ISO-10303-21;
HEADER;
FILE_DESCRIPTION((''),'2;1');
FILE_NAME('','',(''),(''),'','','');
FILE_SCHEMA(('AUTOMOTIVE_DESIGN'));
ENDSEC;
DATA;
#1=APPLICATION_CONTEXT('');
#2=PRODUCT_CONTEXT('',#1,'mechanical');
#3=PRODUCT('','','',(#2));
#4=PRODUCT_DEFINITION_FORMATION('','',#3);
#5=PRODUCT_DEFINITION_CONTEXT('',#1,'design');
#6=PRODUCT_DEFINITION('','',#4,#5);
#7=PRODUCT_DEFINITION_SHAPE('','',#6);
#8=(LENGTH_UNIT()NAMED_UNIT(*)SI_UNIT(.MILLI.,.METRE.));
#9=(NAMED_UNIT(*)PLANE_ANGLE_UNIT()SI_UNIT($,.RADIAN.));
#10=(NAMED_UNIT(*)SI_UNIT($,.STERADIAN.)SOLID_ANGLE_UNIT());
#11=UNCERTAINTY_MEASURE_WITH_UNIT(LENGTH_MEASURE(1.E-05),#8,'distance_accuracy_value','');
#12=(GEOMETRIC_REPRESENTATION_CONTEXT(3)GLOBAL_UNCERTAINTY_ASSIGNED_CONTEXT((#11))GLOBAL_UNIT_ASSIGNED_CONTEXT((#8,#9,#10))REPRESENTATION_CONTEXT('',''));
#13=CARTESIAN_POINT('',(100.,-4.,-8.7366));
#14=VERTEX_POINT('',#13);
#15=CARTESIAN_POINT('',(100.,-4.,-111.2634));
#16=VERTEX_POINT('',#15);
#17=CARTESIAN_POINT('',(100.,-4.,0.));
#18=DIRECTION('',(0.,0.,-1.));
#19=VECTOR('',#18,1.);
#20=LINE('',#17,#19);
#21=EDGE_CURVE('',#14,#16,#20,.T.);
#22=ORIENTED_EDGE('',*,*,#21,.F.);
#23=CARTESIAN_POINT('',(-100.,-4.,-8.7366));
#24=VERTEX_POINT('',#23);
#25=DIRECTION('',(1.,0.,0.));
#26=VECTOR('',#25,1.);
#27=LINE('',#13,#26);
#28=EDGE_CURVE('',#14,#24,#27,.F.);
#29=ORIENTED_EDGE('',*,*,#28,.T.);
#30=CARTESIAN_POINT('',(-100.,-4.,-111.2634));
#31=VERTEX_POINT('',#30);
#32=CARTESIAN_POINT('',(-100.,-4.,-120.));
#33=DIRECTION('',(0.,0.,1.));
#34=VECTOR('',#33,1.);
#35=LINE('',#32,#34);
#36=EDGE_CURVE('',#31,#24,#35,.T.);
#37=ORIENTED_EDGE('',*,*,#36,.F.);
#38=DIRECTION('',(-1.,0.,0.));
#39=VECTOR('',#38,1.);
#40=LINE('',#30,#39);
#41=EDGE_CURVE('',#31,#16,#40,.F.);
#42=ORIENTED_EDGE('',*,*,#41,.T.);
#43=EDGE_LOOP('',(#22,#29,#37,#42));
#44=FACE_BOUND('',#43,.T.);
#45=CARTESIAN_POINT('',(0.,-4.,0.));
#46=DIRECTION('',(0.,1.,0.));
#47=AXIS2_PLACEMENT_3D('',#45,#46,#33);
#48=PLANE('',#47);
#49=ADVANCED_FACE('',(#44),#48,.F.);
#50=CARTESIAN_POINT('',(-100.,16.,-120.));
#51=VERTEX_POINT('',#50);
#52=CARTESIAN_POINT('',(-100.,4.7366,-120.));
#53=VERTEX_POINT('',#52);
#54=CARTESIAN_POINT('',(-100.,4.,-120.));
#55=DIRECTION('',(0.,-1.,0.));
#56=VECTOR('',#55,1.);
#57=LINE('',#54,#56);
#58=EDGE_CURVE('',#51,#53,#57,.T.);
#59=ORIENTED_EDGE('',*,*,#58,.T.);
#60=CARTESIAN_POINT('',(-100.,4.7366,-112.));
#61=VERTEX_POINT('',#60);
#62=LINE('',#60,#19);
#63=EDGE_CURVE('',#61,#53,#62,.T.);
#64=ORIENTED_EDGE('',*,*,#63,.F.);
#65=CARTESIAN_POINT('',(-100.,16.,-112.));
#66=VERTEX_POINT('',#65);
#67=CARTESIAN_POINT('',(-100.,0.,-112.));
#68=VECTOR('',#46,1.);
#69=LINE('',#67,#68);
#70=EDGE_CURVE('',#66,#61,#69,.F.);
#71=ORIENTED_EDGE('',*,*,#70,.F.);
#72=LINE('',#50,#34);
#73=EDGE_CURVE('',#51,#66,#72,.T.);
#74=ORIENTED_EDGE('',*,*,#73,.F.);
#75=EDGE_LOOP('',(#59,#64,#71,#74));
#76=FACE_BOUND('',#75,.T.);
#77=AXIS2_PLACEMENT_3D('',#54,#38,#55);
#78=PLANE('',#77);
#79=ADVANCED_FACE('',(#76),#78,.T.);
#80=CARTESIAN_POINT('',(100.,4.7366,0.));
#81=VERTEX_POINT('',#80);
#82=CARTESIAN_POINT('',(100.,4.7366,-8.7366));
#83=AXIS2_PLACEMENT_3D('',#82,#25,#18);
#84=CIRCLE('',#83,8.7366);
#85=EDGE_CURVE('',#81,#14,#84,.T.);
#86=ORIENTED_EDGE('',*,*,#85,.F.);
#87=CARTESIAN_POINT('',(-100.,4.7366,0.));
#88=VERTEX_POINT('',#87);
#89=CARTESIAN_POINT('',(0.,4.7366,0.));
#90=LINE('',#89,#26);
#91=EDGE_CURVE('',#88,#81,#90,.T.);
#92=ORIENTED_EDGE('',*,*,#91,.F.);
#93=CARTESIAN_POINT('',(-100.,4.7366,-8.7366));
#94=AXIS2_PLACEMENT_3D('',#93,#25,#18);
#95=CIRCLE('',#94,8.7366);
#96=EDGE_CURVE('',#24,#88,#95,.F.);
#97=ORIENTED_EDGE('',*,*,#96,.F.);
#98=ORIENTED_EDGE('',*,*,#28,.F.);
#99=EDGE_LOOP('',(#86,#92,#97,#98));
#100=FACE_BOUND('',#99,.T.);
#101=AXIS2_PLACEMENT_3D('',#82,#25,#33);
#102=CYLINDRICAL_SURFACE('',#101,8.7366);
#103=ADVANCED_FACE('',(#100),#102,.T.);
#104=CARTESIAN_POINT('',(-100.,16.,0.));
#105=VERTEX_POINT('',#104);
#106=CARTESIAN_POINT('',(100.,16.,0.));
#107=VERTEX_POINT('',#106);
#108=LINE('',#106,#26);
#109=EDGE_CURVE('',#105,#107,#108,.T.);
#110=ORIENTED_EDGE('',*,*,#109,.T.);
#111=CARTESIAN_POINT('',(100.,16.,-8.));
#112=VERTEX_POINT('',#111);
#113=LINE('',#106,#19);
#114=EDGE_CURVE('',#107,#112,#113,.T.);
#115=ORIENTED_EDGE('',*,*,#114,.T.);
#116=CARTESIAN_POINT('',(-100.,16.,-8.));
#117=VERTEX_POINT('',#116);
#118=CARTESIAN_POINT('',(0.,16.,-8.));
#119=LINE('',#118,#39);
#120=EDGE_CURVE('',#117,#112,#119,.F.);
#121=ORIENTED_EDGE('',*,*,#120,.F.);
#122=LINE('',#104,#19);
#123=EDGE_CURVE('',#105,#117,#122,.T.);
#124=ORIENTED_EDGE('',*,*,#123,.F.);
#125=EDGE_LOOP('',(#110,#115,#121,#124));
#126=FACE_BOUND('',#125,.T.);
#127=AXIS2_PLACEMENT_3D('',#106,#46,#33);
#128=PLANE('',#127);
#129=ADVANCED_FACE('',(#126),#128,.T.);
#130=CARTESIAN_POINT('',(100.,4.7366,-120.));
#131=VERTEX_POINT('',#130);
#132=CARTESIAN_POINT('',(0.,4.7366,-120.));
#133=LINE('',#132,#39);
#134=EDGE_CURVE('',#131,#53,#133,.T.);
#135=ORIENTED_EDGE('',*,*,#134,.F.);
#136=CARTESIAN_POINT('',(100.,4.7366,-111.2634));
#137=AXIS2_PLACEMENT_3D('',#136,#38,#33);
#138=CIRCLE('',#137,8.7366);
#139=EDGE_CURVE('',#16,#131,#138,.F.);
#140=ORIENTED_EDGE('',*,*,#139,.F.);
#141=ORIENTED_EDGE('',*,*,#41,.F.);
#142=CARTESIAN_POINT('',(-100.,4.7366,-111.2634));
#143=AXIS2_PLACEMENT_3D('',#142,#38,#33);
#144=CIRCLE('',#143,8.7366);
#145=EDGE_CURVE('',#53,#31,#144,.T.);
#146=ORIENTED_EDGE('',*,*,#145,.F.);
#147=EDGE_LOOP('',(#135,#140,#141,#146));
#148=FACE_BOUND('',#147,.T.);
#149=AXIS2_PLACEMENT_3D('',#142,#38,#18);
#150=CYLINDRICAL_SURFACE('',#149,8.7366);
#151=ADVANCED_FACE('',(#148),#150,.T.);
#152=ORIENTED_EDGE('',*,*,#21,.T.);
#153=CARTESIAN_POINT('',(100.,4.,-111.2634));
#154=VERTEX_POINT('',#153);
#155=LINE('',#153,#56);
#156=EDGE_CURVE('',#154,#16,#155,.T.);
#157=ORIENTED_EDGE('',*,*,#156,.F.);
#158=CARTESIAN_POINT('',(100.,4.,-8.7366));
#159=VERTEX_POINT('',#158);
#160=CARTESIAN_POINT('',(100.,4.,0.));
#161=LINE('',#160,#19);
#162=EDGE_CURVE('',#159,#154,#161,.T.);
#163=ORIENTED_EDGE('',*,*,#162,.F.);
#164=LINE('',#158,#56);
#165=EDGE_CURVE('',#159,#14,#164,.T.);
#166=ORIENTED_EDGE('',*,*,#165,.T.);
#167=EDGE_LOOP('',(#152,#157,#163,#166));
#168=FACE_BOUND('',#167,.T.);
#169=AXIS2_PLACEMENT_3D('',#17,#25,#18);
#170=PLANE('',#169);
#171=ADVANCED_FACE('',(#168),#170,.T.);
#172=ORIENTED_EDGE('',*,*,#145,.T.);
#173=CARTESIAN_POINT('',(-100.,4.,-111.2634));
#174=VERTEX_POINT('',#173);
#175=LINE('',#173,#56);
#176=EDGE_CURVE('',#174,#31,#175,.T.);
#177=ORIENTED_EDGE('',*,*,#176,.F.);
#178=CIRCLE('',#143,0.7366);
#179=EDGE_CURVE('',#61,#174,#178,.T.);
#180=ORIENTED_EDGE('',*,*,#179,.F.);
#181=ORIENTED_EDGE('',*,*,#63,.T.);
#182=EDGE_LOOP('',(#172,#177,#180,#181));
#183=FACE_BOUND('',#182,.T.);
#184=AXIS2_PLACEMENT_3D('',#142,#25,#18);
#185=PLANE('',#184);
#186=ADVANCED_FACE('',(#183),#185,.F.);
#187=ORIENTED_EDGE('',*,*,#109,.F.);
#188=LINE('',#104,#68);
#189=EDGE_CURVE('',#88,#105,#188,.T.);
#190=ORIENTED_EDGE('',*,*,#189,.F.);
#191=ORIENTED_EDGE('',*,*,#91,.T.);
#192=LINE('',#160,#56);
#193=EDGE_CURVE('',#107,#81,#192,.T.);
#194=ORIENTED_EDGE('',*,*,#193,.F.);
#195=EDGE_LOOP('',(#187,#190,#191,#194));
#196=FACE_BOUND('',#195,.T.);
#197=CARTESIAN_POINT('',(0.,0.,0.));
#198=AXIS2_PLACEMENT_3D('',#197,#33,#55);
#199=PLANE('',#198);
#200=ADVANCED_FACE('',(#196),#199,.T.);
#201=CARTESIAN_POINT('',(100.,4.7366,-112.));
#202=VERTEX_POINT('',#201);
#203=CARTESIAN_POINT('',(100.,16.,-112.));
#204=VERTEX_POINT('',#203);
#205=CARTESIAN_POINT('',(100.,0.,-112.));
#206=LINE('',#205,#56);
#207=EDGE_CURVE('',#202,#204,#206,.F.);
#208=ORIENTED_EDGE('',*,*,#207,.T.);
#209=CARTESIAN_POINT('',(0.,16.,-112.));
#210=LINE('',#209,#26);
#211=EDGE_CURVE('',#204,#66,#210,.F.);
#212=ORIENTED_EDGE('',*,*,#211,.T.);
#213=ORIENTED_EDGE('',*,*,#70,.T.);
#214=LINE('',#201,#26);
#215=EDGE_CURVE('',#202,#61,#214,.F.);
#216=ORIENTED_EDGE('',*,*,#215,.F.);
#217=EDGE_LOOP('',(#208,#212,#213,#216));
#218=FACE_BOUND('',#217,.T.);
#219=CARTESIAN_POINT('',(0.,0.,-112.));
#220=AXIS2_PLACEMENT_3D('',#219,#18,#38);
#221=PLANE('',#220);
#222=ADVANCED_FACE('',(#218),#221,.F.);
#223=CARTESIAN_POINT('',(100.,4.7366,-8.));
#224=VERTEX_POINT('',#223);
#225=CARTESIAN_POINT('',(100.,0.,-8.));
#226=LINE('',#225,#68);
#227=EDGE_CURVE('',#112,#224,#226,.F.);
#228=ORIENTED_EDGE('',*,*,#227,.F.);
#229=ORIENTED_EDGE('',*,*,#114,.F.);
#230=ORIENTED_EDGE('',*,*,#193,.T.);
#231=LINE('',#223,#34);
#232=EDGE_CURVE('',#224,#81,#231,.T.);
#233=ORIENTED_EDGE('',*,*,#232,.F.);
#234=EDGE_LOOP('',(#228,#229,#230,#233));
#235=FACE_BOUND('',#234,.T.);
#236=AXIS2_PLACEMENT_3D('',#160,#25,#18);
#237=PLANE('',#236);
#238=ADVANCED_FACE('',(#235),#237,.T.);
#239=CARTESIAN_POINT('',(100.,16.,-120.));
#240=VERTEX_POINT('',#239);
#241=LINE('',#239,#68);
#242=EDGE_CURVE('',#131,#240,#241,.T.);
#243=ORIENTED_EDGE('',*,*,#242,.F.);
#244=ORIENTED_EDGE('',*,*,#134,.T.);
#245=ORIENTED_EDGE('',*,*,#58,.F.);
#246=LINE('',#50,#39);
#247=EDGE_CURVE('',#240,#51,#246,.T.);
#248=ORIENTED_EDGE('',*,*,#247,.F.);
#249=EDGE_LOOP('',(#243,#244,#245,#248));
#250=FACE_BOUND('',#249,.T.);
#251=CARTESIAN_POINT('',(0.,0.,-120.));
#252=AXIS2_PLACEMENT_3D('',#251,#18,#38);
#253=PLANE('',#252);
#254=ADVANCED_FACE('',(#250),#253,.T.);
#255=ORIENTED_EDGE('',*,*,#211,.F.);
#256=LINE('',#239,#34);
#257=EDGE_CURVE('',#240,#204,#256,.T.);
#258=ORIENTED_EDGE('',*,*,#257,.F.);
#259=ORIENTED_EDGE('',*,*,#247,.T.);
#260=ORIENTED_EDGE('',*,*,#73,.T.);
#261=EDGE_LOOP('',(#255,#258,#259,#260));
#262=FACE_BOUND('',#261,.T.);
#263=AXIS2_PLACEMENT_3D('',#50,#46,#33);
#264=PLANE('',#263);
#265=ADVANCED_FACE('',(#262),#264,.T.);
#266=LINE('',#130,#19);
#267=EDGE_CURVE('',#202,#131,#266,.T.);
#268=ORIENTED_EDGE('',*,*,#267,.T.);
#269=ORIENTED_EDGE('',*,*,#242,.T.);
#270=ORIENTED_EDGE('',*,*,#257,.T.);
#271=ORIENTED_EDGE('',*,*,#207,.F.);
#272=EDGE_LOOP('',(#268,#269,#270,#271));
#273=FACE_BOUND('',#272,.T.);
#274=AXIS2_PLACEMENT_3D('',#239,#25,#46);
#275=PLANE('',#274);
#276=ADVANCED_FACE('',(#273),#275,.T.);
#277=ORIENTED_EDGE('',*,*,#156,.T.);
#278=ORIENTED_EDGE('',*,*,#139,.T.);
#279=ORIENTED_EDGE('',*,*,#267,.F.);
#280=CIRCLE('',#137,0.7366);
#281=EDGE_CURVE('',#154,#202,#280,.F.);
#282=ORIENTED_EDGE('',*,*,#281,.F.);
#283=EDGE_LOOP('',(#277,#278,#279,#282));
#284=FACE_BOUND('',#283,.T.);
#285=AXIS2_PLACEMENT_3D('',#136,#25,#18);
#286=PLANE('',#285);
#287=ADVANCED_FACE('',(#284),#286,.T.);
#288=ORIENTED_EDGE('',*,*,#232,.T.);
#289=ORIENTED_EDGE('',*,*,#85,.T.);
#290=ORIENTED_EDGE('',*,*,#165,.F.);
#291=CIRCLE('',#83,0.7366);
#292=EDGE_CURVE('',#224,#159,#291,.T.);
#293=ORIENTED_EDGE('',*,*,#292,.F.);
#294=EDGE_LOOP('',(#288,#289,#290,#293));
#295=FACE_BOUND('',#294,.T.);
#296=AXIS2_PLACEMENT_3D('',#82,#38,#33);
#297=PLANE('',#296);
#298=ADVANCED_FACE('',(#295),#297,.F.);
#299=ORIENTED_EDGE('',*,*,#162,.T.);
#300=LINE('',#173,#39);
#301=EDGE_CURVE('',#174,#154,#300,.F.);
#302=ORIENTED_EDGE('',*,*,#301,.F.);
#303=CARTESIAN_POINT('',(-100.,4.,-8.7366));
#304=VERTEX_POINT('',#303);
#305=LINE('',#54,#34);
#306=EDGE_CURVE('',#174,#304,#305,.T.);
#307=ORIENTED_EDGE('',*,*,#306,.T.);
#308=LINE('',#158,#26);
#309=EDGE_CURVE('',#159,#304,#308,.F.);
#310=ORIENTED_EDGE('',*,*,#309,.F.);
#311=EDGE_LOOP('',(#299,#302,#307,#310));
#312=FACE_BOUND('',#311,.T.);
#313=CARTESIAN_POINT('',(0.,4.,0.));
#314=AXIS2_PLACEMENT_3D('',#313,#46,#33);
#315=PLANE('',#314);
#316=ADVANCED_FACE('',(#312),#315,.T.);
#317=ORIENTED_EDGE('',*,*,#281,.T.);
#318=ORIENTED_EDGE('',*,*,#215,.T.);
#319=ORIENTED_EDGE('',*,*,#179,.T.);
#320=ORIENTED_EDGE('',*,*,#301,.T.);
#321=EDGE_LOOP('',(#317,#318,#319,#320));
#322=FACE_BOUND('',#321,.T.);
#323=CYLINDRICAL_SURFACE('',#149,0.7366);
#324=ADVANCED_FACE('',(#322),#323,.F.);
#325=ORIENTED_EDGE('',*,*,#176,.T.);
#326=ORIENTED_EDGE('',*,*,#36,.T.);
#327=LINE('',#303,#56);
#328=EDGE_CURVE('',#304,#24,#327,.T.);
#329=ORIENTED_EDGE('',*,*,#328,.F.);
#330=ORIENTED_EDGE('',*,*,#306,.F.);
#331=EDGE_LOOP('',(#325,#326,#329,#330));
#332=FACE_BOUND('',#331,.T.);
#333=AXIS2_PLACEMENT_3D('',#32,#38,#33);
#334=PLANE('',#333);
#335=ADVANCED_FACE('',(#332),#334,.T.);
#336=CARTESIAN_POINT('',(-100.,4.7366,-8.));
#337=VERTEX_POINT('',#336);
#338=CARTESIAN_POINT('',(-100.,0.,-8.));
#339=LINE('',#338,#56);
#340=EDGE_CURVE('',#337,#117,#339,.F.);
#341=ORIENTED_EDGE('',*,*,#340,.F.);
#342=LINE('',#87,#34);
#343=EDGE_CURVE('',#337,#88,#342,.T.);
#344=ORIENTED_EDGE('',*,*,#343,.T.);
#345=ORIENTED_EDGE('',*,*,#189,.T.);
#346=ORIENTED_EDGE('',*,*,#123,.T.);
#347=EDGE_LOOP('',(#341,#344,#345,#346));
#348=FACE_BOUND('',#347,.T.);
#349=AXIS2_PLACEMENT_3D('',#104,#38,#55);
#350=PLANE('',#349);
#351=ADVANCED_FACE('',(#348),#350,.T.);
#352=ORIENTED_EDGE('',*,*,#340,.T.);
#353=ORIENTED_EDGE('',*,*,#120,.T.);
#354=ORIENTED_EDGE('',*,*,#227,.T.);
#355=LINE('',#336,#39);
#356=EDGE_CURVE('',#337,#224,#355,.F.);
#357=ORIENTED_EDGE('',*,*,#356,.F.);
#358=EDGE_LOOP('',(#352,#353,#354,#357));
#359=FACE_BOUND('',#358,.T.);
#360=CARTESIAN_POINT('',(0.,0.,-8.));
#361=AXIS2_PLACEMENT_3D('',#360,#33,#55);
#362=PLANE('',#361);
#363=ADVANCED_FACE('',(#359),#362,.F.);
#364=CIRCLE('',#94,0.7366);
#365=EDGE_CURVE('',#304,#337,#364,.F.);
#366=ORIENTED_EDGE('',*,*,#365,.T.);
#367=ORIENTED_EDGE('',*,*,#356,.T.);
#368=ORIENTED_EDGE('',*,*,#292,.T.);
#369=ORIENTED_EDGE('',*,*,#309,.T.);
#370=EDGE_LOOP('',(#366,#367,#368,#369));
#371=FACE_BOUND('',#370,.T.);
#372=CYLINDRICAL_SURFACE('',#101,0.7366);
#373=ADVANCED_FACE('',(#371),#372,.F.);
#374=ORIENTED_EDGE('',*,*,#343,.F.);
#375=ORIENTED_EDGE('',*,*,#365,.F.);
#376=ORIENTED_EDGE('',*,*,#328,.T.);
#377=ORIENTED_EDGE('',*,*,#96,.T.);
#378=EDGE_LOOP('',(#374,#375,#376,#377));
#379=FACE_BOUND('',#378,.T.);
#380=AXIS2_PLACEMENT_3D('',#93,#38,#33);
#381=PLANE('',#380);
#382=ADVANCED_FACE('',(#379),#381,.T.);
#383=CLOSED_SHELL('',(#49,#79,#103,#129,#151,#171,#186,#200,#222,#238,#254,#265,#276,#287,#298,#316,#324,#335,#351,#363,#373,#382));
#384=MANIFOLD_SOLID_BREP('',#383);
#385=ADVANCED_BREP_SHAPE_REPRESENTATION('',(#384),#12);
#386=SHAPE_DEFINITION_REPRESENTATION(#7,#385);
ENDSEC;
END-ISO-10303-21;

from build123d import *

# Parameters (mm, degrees)
SM_START                         = -4
SM_BASE_FLANGE_1_OUTLINE_W       = 200
SM_BASE_FLANGE_1_OUTLINE_H       = 120
SM_BASE_FLANGE_1_DEPTH           = 8
SM_EDGE_FLANGE_1_STRIP_W         = 33.4732
SM_EDGE_FLANGE_1_STRIP_H         = 8
SM_EDGE_FLANGE_1_STRIP_CUT_DEPTH = 200
SM_EDGE_FLANGE_1_DEPTH           = 200
SM_EDGE_FLANGE_2_STRIP_W         = 33.4732
SM_EDGE_FLANGE_2_STRIP_H         = 8
SM_EDGE_FLANGE_2_STRIP_CUT_DEPTH = 200
SM_EDGE_FLANGE_2_DEPTH           = 200


# Read off the part's stored shape, not the designer's step: 基体-法兰1
# Sheet-metal steps are written as plain solids
with BuildPart() as part:
    # 基体-法兰1 outline → 基体-法兰1 (new body)
    with BuildSketch(Plane(origin=(0, 0, 0), x_dir=(1, 0, 0), z_dir=(0, 1, 0)).offset(SM_START)):
        with Locations((0, 60)):
            Rectangle(SM_BASE_FLANGE_1_OUTLINE_W, SM_BASE_FLANGE_1_OUTLINE_H)
    extrude(amount=SM_BASE_FLANGE_1_DEPTH)

    # 边线-法兰1 strip (across the edge) → 边线-法兰1 strip cut (cut)
    with BuildSketch(Plane(origin=(-100, 4, 0), x_dir=(0, 0, -1), z_dir=(1, 0, 0))):
        with Locations((-8, -4)):
            Rectangle(SM_EDGE_FLANGE_1_STRIP_W, SM_EDGE_FLANGE_1_STRIP_H)
    extrude(amount=SM_EDGE_FLANGE_1_STRIP_CUT_DEPTH, mode=Mode.SUBTRACT)

    # 边线-法兰1 section (across the edge) → 边线-法兰1 (add)
    with BuildSketch(Plane(origin=(-100, 4, 0), x_dir=(0, 0, -1), z_dir=(1, 0, 0))):
        with BuildLine():
            Line((0, 0.7366), (0, 12))
            Line((0, 12), (8, 12))
            Line((8, 12), (8, 0.7366))
            ThreePointArc((8, 0.7366), (8.215745145, 0.215745145), (8.7366, 0))
            Line((8.7366, 0), (8.7366, -8))
            ThreePointArc((8.7366, -8), (2.558890895, -5.441109105), (0, 0.7366))
        make_face()
    extrude(amount=SM_EDGE_FLANGE_1_DEPTH)

    # 边线-法兰2 strip (across the edge) → 边线-法兰2 strip cut (cut)
    with BuildSketch(Plane(origin=(100, 4, -120), x_dir=(0, 0, 1), z_dir=(-1, 0, 0))):
        with Locations((-8, -4)):
            Rectangle(SM_EDGE_FLANGE_2_STRIP_W, SM_EDGE_FLANGE_2_STRIP_H)
    extrude(amount=SM_EDGE_FLANGE_2_STRIP_CUT_DEPTH, mode=Mode.SUBTRACT)

    # 边线-法兰2 section (across the edge) → 边线-法兰2 (add)
    with BuildSketch(Plane(origin=(100, 4, -120), x_dir=(0, 0, 1), z_dir=(-1, 0, 0))):
        with BuildLine():
            Line((0, 0.7366), (0, 12))
            Line((0, 12), (8, 12))
            Line((8, 12), (8, 0.7366))
            ThreePointArc((8, 0.7366), (8.215745145, 0.215745145), (8.7366, 0))
            Line((8.7366, 0), (8.7366, -8))
            ThreePointArc((8.7366, -8), (2.558890895, -5.441109105), (0, 0.7366))
        make_face()
    extrude(amount=SM_EDGE_FLANGE_2_DEPTH)


solid = part.part
